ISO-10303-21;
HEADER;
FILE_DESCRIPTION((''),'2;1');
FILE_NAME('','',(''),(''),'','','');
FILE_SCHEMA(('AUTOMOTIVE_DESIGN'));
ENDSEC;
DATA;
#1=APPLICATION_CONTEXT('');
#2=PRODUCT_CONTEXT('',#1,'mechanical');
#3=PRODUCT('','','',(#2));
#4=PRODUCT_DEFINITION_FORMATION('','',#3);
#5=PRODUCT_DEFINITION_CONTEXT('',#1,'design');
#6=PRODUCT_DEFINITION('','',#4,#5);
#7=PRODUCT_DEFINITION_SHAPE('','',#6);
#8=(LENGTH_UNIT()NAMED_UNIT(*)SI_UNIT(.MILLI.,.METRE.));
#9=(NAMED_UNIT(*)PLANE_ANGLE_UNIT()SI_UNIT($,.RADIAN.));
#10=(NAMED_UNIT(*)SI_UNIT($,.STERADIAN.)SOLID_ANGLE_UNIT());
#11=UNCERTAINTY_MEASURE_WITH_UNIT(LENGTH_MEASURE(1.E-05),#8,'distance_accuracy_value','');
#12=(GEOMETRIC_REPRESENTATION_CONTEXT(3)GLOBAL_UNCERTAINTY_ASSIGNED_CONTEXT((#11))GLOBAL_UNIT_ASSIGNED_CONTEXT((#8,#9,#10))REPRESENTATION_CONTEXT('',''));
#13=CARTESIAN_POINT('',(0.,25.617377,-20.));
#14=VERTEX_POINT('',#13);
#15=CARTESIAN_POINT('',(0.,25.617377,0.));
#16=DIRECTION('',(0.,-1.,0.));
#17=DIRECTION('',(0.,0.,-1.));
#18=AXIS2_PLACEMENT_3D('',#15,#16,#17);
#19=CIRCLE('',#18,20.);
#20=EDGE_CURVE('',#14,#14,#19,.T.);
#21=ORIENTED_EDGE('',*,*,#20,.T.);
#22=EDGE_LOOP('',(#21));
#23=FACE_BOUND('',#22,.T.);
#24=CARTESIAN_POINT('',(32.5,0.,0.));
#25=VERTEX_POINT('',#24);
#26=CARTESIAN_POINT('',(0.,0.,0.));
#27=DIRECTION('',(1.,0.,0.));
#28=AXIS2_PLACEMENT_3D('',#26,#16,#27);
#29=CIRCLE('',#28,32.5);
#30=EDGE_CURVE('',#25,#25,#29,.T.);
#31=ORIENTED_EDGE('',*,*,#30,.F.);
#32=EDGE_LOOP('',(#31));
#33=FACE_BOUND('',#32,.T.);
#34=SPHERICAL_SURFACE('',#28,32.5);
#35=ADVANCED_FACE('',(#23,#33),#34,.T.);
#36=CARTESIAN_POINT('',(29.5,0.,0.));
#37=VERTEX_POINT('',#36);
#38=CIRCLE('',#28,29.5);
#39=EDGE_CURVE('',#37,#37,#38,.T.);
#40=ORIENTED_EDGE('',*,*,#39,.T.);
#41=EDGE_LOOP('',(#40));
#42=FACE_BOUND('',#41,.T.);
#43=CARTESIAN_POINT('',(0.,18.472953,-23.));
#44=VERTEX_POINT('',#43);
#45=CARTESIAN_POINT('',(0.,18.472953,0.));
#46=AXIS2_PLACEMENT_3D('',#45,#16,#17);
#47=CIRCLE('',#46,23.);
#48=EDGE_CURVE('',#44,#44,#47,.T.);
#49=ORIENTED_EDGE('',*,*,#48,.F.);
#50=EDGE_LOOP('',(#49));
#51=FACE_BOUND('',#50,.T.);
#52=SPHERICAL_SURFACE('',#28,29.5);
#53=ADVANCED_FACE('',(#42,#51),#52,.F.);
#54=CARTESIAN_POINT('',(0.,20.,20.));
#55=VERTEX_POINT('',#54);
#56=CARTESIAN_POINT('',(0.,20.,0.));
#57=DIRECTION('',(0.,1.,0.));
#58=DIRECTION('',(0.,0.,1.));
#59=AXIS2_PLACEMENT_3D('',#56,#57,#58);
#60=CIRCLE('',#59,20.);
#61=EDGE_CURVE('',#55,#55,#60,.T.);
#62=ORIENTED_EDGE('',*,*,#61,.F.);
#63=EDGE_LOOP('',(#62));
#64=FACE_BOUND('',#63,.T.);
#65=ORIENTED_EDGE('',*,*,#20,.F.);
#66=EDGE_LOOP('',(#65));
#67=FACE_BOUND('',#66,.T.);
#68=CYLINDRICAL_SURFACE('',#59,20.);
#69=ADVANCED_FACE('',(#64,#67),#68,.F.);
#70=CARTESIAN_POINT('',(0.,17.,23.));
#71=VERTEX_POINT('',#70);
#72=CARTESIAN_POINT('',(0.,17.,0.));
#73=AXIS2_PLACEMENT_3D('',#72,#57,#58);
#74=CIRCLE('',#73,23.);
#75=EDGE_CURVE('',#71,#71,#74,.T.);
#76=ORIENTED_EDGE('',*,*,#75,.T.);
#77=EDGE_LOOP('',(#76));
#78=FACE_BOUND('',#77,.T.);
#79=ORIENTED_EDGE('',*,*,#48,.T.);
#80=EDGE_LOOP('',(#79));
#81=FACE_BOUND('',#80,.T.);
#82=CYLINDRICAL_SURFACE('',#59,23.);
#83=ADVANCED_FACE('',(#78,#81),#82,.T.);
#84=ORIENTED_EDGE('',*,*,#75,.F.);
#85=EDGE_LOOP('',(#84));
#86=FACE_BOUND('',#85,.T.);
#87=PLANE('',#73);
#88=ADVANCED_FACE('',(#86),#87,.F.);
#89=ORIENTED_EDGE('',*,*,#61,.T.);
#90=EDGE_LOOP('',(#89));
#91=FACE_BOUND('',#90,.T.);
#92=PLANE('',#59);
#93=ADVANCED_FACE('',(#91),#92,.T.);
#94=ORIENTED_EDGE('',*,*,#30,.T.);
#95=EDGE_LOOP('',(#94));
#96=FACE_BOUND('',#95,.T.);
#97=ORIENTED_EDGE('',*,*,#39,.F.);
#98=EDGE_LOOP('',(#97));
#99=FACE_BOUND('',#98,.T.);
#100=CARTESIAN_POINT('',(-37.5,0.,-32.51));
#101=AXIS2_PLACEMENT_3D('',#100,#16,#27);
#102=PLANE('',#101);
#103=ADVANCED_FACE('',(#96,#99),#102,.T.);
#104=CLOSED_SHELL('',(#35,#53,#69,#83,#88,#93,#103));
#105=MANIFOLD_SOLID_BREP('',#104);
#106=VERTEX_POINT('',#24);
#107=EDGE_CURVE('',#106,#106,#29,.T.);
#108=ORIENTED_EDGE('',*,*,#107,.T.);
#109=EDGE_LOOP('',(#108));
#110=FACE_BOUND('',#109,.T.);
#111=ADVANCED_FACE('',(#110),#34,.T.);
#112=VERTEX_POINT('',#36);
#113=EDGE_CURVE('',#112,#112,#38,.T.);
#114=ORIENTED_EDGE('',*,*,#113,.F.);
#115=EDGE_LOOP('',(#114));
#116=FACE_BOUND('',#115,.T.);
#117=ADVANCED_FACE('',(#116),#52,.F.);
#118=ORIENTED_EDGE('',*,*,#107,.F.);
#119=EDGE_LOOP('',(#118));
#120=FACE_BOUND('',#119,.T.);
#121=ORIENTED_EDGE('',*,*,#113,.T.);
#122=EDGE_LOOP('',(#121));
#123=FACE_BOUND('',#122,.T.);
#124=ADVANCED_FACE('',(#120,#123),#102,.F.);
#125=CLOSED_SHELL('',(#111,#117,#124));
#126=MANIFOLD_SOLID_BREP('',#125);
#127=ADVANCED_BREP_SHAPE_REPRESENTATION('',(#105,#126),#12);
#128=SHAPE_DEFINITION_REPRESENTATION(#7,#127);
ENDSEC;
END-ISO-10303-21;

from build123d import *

# Parameters (mm, degrees)
SKETCH5_R              = 20
BUTTON_CUT_DEPTH       = 12.5
SPLIT1_SURFACE_1_BACK  = 109.755
SPLIT1_SURFACE_1_DEPTH = 219.51
SPLIT1_SURFACE_2_BACK  = 109.755
SPLIT1_SURFACE_2_DEPTH = 219.51


# Read off the part's stored shape, not the designer's step: Shell1
with BuildPart() as part:
    # Sketch1 → Sphere (revolve)
    with BuildSketch(Plane.XY):
        with BuildLine():
            Line((0, -32.5), (0, 32.5))
            ThreePointArc((0, 32.5), (-32.5, 0), (0, -32.5))
        make_face()
    revolve(axis=Axis((0, -32.5, 0), (0, 1, 0)))

    # Sketch5 → Button Cut (cut)
    with BuildSketch(Plane(origin=(0, 32.5, 0), x_dir=(1, 0, 0), z_dir=(0, 1, 0))):
        with Locations(Location((0, 0, 0), (0, 0, 270))):
            Circle(SKETCH5_R)
    extrude(amount=-BUTTON_CUT_DEPTH, mode=Mode.SUBTRACT)

    # Shell1 outline → Shell1 (revolve, cut)
    with BuildSketch(Plane.XY):
        with BuildLine():
            Line((0, 17), (0, -29.5))
            ThreePointArc((0, -29.5), (26.600771792, -12.753389358), (22.999999991, 18.472953214))
            Line((22.999999991, 18.472953214), (23, 17))
            Line((23, 17), (0, 17))
        make_face()
    revolve(axis=Axis((0, 0, 0), (0, 1, 0)), mode=Mode.SUBTRACT)


with BuildPart() as body_2:
    # Split1: the piece behind the surface
    add(part.part)
    # Split1 surface: a surface, the sketch's curves swept straight by 219.51 mm
    with BuildLine(Plane.XY.offset(-SPLIT1_SURFACE_1_BACK), mode=Mode.PRIVATE) as split1_surface_1_path:
        Line((-37.5, 0), (37.5, 0))
    split1_surface_1 = Shell.extrude(split1_surface_1_path.wire(), (0 * SPLIT1_SURFACE_1_DEPTH, 0 * SPLIT1_SURFACE_1_DEPTH, 1 * SPLIT1_SURFACE_1_DEPTH))
    split(bisect_by=split1_surface_1, keep=Keep.BOTTOM)


with BuildPart() as part_1:
    add(part.part)

    # Split1: split by a surface, the side it looks to stays
    # Split1 surface: a surface, the sketch's curves swept straight by 219.51 mm
    with BuildLine(Plane.XY.offset(-SPLIT1_SURFACE_2_BACK), mode=Mode.PRIVATE) as split1_surface_2_path:
        Line((-37.5, 0), (37.5, 0))
    split1_surface_2 = Shell.extrude(split1_surface_2_path.wire(), (0 * SPLIT1_SURFACE_2_DEPTH, 0 * SPLIT1_SURFACE_2_DEPTH, 1 * SPLIT1_SURFACE_2_DEPTH))
    split(bisect_by=split1_surface_2, keep=Keep.TOP)


solid = Compound([body_2.part, part_1.part])
